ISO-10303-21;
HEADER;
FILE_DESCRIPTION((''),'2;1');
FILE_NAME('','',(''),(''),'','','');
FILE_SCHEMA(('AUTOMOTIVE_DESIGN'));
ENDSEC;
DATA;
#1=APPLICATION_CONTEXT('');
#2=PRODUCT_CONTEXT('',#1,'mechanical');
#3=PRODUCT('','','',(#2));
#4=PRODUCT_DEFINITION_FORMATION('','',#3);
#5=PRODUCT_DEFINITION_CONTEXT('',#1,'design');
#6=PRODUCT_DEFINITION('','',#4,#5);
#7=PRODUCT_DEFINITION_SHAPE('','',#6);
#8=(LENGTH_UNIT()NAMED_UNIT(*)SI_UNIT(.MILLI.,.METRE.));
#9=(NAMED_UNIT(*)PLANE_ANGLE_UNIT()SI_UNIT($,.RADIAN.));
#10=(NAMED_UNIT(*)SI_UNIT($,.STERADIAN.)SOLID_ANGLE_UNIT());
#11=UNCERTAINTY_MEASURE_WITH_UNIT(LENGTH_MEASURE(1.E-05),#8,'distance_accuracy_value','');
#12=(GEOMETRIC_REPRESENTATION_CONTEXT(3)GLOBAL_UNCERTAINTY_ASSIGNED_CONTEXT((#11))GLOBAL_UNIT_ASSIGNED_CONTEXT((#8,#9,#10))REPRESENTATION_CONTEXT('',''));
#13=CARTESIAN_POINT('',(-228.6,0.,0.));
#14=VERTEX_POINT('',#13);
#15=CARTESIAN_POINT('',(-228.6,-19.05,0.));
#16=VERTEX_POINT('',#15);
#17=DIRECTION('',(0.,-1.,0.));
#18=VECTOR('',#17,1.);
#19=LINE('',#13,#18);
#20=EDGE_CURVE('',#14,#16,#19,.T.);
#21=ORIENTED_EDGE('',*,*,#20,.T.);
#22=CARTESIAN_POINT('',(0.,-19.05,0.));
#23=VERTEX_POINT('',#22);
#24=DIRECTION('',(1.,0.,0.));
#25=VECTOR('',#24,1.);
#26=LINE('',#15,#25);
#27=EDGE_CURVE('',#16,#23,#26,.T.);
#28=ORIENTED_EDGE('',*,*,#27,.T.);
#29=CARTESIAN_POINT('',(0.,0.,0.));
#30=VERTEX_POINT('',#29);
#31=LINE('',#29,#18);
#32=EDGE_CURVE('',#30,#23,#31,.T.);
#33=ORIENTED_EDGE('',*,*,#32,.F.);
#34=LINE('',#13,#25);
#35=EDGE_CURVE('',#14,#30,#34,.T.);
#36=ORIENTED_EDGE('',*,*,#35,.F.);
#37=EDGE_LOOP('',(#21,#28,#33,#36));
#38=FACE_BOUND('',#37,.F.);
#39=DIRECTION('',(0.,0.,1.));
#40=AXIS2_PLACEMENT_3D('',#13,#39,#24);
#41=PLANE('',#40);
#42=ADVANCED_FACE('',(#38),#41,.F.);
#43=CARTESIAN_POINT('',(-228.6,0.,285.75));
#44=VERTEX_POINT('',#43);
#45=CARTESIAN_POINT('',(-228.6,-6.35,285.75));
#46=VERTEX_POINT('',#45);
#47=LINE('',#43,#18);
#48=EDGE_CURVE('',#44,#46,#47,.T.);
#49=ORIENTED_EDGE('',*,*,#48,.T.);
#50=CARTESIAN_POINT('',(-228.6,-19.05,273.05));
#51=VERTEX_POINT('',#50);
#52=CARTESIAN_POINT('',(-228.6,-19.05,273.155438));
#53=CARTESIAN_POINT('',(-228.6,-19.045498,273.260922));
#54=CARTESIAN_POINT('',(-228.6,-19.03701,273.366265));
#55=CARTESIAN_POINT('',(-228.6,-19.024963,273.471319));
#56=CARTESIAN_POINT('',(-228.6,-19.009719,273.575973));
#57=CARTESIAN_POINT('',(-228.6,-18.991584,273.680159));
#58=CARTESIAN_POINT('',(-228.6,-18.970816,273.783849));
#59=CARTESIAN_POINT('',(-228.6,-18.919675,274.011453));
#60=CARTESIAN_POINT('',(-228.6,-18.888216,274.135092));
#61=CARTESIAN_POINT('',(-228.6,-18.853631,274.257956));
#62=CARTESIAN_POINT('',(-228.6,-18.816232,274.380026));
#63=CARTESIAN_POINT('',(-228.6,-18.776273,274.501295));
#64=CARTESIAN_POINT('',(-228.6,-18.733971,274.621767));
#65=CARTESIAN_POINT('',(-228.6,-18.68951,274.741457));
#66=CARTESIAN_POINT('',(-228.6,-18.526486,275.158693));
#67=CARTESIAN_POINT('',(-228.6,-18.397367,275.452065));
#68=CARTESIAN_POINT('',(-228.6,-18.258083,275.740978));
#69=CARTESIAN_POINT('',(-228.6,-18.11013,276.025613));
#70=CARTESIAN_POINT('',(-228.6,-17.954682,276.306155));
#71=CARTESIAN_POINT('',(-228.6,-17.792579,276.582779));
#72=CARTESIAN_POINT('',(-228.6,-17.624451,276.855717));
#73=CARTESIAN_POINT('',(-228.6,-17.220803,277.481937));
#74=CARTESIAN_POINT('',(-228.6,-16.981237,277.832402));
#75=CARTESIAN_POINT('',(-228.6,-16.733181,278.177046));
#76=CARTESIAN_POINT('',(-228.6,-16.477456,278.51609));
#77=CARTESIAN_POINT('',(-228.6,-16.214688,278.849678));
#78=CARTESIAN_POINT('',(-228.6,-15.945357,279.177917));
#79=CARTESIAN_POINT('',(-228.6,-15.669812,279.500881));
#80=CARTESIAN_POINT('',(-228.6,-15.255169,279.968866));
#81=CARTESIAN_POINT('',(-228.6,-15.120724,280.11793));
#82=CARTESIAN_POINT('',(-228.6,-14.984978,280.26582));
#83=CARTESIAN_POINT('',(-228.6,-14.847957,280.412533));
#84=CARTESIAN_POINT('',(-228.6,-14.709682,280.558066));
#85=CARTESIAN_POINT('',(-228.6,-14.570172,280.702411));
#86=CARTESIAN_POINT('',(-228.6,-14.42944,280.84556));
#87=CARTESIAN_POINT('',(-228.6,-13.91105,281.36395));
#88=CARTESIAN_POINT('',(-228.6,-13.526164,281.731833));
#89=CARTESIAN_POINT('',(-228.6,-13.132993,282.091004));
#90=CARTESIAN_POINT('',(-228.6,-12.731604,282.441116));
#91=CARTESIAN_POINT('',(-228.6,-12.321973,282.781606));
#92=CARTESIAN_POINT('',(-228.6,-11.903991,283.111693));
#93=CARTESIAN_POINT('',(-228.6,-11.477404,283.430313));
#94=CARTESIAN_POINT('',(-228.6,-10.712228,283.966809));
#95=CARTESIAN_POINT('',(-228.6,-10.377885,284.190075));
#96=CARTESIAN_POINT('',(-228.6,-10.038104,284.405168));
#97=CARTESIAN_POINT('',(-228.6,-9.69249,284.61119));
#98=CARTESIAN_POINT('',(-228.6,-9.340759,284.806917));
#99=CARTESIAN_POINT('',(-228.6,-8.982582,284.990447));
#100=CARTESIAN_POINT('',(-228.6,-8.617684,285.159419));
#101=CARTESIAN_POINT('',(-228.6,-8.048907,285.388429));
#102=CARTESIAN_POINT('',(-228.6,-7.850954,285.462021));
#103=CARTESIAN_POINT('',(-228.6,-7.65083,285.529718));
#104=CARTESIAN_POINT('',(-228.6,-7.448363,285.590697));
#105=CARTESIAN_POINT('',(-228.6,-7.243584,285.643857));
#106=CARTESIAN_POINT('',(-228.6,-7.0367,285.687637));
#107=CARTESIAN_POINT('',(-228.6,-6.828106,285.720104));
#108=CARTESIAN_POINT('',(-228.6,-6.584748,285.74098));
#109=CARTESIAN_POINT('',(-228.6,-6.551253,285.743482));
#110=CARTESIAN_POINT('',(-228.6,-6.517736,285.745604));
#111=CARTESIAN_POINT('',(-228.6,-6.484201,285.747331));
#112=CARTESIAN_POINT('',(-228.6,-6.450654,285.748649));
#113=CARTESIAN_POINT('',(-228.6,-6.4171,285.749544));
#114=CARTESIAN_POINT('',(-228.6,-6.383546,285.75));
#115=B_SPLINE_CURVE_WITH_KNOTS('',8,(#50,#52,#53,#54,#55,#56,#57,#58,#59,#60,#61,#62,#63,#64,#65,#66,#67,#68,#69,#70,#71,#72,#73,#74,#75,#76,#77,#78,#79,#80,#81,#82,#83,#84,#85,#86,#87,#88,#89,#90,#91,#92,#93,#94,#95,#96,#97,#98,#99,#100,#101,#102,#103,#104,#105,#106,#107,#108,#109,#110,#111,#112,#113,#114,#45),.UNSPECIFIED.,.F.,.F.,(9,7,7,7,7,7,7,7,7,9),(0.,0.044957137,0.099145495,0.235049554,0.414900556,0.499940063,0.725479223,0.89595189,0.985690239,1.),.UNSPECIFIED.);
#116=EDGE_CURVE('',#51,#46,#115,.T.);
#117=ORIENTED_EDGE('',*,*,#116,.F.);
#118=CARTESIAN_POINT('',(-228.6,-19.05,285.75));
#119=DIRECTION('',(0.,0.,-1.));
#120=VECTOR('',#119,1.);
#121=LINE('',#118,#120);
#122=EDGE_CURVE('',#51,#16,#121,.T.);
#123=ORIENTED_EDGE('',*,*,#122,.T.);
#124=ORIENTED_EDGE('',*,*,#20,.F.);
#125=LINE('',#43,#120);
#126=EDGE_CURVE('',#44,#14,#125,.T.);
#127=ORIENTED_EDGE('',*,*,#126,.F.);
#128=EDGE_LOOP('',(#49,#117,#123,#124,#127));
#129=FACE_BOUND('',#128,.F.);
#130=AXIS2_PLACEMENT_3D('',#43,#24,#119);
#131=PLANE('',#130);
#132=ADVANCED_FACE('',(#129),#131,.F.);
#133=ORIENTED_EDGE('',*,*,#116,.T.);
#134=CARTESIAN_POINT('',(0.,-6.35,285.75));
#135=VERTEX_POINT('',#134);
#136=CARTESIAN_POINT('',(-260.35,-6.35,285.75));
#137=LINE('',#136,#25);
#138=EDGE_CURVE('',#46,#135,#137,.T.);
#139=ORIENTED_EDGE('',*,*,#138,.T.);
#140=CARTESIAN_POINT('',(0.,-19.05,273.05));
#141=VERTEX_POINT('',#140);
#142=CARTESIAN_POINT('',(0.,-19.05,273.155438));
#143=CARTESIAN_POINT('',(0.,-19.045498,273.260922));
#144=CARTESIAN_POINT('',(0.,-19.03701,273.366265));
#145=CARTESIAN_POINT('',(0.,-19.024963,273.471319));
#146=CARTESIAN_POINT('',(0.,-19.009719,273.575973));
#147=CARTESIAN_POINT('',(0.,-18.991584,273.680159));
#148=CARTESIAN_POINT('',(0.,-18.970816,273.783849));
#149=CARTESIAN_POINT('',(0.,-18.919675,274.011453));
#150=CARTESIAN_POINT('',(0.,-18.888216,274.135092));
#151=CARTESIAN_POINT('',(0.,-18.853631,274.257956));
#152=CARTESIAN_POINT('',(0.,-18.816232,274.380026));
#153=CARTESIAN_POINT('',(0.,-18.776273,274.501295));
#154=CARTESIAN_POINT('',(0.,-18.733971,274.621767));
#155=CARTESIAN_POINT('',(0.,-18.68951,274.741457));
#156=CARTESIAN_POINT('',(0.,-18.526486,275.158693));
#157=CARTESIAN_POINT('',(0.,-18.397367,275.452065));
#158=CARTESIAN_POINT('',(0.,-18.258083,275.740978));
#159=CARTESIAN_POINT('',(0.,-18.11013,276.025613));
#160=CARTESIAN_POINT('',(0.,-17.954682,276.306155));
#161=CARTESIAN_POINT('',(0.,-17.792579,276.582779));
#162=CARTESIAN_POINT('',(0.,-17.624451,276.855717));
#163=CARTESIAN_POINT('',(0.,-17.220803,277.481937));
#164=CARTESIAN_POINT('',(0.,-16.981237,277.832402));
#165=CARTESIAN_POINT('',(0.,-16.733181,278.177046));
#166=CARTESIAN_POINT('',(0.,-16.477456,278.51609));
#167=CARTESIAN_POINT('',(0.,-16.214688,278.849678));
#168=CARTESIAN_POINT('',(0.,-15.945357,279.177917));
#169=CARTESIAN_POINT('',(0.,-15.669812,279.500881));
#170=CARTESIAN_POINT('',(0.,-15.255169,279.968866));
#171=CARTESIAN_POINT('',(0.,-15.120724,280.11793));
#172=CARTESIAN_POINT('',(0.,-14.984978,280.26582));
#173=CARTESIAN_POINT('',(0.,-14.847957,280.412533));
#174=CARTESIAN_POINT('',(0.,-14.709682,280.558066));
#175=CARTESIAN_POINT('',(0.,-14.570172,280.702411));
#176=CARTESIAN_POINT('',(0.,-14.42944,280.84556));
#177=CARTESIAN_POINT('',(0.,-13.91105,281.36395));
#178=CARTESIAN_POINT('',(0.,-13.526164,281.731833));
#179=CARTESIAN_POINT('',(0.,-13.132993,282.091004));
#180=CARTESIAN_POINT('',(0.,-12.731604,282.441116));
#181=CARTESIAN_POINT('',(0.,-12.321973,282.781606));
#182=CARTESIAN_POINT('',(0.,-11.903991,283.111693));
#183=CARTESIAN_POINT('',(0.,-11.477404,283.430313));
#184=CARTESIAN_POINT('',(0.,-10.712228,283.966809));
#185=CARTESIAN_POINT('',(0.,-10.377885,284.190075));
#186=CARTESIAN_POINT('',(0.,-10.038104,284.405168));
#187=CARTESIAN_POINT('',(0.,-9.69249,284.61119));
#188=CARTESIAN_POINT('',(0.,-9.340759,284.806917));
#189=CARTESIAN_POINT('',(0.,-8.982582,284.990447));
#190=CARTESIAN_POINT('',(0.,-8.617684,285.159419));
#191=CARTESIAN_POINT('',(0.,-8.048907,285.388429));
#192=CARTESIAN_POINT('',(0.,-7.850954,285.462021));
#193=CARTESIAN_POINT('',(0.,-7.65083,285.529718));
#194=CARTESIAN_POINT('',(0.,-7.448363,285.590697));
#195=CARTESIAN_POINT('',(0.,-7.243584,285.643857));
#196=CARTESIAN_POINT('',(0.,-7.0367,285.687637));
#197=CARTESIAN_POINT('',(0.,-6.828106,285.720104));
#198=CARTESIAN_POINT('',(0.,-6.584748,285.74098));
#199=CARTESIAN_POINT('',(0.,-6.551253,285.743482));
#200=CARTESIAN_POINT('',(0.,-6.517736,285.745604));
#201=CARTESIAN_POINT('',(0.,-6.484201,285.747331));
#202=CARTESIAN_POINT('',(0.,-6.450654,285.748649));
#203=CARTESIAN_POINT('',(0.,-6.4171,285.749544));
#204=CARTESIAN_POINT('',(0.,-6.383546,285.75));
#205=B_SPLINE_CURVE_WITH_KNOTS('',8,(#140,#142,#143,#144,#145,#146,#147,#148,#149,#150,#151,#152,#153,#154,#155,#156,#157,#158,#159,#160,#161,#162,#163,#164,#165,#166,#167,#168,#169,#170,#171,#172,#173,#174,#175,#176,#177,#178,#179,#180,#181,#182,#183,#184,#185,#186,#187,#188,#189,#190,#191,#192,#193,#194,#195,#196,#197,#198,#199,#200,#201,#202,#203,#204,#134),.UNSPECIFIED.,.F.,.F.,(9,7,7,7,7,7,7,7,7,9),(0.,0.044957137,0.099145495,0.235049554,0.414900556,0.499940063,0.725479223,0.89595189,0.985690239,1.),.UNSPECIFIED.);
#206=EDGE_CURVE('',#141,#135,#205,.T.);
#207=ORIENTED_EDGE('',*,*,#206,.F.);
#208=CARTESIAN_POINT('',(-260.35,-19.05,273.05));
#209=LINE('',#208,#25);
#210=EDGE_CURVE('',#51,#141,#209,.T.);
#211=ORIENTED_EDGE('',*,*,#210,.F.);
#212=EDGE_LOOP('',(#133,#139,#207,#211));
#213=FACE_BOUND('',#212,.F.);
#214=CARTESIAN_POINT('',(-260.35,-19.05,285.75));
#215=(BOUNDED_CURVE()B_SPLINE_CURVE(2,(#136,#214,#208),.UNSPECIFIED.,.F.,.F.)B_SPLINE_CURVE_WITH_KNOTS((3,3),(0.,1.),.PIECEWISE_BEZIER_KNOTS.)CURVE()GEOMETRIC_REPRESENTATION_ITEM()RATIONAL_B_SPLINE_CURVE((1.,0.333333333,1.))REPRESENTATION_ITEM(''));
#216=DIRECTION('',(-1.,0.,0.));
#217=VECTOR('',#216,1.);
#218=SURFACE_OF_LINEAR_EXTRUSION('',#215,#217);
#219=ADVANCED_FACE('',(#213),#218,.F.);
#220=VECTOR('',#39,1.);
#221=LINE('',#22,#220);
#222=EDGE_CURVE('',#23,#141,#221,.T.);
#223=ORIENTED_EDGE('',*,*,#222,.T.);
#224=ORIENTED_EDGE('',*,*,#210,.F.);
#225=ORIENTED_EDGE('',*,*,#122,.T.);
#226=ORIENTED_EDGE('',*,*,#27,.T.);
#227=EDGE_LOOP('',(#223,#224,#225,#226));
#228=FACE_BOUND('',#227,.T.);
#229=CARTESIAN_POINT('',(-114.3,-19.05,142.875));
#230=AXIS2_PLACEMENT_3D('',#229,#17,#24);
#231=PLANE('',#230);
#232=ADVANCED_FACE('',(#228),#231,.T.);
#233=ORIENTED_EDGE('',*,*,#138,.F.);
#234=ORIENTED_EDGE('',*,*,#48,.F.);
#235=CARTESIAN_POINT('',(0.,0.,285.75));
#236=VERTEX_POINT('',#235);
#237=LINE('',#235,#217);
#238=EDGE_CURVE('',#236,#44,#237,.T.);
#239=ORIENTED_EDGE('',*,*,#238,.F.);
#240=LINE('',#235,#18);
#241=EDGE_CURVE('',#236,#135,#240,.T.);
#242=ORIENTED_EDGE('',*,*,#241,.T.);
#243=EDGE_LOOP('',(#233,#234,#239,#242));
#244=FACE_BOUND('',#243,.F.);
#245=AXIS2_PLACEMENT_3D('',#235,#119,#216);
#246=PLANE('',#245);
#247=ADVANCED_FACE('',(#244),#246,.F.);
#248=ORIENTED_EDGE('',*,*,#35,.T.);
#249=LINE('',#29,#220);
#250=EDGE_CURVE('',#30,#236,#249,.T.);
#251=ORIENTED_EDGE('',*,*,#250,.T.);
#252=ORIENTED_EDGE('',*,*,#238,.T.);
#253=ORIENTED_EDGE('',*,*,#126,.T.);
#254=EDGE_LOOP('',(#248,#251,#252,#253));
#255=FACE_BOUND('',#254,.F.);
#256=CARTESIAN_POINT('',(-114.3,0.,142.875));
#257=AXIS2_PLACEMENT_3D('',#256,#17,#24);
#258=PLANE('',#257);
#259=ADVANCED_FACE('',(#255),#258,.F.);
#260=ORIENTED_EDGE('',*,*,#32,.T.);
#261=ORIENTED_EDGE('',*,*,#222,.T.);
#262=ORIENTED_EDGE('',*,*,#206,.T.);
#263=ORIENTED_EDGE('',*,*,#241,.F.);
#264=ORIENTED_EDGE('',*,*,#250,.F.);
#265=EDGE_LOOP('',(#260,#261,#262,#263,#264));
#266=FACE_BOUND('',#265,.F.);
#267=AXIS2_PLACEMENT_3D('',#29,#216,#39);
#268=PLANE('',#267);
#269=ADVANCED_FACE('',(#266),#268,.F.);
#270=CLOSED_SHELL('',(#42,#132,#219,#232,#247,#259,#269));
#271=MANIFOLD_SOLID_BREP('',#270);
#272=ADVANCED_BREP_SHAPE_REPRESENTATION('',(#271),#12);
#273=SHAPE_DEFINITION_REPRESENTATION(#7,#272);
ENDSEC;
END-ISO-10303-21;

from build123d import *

# Parameters (mm, degrees)
F1_DEPTH    = 19.05
F2_T1_DEPTH = 292.1


# Not quite as in the source:
# - a fillet or chamfer that OpenCascade refuses, or shapes differently, is made with other operations: its cross-section is extruded or revolved along the edge and cut away or added
# - a feature names something its author has since deleted; it is built from what else it names


with BuildPart() as f1:
    # F0 (on Front) → F1 (new body)
    with BuildSketch(Plane.XZ):
        Polygon((-228.6, 0), (0, 0), (0, 228.6), (0, 285.75), (-228.6, 285.75), (-228.6, 228.6), align=None)
    extrude(amount=F1_DEPTH)

    # F2: fillet of radius 12.7 on 1 edges, made by hand

    # F2_s2 → F2_t1 (cut)
    with BuildSketch(Plane.YZ.offset(-260.35)):
        with BuildLine():
            add(Edge.make_bspline(
                [(-6.35, 285.75), (-19.05, 285.75), (-19.05, 273.05)],
                knots=[0, 0, 0, 1, 1, 1], degree=2, weights=[1, 0.3333333333, 1]))
            Line((-19.05, 273.05), (-19.05, 285.75))
            Line((-19.05, 285.75), (-6.35, 285.75))
        make_face()
    extrude(amount=F2_T1_DEPTH, mode=Mode.SUBTRACT)


solid = f1.part
